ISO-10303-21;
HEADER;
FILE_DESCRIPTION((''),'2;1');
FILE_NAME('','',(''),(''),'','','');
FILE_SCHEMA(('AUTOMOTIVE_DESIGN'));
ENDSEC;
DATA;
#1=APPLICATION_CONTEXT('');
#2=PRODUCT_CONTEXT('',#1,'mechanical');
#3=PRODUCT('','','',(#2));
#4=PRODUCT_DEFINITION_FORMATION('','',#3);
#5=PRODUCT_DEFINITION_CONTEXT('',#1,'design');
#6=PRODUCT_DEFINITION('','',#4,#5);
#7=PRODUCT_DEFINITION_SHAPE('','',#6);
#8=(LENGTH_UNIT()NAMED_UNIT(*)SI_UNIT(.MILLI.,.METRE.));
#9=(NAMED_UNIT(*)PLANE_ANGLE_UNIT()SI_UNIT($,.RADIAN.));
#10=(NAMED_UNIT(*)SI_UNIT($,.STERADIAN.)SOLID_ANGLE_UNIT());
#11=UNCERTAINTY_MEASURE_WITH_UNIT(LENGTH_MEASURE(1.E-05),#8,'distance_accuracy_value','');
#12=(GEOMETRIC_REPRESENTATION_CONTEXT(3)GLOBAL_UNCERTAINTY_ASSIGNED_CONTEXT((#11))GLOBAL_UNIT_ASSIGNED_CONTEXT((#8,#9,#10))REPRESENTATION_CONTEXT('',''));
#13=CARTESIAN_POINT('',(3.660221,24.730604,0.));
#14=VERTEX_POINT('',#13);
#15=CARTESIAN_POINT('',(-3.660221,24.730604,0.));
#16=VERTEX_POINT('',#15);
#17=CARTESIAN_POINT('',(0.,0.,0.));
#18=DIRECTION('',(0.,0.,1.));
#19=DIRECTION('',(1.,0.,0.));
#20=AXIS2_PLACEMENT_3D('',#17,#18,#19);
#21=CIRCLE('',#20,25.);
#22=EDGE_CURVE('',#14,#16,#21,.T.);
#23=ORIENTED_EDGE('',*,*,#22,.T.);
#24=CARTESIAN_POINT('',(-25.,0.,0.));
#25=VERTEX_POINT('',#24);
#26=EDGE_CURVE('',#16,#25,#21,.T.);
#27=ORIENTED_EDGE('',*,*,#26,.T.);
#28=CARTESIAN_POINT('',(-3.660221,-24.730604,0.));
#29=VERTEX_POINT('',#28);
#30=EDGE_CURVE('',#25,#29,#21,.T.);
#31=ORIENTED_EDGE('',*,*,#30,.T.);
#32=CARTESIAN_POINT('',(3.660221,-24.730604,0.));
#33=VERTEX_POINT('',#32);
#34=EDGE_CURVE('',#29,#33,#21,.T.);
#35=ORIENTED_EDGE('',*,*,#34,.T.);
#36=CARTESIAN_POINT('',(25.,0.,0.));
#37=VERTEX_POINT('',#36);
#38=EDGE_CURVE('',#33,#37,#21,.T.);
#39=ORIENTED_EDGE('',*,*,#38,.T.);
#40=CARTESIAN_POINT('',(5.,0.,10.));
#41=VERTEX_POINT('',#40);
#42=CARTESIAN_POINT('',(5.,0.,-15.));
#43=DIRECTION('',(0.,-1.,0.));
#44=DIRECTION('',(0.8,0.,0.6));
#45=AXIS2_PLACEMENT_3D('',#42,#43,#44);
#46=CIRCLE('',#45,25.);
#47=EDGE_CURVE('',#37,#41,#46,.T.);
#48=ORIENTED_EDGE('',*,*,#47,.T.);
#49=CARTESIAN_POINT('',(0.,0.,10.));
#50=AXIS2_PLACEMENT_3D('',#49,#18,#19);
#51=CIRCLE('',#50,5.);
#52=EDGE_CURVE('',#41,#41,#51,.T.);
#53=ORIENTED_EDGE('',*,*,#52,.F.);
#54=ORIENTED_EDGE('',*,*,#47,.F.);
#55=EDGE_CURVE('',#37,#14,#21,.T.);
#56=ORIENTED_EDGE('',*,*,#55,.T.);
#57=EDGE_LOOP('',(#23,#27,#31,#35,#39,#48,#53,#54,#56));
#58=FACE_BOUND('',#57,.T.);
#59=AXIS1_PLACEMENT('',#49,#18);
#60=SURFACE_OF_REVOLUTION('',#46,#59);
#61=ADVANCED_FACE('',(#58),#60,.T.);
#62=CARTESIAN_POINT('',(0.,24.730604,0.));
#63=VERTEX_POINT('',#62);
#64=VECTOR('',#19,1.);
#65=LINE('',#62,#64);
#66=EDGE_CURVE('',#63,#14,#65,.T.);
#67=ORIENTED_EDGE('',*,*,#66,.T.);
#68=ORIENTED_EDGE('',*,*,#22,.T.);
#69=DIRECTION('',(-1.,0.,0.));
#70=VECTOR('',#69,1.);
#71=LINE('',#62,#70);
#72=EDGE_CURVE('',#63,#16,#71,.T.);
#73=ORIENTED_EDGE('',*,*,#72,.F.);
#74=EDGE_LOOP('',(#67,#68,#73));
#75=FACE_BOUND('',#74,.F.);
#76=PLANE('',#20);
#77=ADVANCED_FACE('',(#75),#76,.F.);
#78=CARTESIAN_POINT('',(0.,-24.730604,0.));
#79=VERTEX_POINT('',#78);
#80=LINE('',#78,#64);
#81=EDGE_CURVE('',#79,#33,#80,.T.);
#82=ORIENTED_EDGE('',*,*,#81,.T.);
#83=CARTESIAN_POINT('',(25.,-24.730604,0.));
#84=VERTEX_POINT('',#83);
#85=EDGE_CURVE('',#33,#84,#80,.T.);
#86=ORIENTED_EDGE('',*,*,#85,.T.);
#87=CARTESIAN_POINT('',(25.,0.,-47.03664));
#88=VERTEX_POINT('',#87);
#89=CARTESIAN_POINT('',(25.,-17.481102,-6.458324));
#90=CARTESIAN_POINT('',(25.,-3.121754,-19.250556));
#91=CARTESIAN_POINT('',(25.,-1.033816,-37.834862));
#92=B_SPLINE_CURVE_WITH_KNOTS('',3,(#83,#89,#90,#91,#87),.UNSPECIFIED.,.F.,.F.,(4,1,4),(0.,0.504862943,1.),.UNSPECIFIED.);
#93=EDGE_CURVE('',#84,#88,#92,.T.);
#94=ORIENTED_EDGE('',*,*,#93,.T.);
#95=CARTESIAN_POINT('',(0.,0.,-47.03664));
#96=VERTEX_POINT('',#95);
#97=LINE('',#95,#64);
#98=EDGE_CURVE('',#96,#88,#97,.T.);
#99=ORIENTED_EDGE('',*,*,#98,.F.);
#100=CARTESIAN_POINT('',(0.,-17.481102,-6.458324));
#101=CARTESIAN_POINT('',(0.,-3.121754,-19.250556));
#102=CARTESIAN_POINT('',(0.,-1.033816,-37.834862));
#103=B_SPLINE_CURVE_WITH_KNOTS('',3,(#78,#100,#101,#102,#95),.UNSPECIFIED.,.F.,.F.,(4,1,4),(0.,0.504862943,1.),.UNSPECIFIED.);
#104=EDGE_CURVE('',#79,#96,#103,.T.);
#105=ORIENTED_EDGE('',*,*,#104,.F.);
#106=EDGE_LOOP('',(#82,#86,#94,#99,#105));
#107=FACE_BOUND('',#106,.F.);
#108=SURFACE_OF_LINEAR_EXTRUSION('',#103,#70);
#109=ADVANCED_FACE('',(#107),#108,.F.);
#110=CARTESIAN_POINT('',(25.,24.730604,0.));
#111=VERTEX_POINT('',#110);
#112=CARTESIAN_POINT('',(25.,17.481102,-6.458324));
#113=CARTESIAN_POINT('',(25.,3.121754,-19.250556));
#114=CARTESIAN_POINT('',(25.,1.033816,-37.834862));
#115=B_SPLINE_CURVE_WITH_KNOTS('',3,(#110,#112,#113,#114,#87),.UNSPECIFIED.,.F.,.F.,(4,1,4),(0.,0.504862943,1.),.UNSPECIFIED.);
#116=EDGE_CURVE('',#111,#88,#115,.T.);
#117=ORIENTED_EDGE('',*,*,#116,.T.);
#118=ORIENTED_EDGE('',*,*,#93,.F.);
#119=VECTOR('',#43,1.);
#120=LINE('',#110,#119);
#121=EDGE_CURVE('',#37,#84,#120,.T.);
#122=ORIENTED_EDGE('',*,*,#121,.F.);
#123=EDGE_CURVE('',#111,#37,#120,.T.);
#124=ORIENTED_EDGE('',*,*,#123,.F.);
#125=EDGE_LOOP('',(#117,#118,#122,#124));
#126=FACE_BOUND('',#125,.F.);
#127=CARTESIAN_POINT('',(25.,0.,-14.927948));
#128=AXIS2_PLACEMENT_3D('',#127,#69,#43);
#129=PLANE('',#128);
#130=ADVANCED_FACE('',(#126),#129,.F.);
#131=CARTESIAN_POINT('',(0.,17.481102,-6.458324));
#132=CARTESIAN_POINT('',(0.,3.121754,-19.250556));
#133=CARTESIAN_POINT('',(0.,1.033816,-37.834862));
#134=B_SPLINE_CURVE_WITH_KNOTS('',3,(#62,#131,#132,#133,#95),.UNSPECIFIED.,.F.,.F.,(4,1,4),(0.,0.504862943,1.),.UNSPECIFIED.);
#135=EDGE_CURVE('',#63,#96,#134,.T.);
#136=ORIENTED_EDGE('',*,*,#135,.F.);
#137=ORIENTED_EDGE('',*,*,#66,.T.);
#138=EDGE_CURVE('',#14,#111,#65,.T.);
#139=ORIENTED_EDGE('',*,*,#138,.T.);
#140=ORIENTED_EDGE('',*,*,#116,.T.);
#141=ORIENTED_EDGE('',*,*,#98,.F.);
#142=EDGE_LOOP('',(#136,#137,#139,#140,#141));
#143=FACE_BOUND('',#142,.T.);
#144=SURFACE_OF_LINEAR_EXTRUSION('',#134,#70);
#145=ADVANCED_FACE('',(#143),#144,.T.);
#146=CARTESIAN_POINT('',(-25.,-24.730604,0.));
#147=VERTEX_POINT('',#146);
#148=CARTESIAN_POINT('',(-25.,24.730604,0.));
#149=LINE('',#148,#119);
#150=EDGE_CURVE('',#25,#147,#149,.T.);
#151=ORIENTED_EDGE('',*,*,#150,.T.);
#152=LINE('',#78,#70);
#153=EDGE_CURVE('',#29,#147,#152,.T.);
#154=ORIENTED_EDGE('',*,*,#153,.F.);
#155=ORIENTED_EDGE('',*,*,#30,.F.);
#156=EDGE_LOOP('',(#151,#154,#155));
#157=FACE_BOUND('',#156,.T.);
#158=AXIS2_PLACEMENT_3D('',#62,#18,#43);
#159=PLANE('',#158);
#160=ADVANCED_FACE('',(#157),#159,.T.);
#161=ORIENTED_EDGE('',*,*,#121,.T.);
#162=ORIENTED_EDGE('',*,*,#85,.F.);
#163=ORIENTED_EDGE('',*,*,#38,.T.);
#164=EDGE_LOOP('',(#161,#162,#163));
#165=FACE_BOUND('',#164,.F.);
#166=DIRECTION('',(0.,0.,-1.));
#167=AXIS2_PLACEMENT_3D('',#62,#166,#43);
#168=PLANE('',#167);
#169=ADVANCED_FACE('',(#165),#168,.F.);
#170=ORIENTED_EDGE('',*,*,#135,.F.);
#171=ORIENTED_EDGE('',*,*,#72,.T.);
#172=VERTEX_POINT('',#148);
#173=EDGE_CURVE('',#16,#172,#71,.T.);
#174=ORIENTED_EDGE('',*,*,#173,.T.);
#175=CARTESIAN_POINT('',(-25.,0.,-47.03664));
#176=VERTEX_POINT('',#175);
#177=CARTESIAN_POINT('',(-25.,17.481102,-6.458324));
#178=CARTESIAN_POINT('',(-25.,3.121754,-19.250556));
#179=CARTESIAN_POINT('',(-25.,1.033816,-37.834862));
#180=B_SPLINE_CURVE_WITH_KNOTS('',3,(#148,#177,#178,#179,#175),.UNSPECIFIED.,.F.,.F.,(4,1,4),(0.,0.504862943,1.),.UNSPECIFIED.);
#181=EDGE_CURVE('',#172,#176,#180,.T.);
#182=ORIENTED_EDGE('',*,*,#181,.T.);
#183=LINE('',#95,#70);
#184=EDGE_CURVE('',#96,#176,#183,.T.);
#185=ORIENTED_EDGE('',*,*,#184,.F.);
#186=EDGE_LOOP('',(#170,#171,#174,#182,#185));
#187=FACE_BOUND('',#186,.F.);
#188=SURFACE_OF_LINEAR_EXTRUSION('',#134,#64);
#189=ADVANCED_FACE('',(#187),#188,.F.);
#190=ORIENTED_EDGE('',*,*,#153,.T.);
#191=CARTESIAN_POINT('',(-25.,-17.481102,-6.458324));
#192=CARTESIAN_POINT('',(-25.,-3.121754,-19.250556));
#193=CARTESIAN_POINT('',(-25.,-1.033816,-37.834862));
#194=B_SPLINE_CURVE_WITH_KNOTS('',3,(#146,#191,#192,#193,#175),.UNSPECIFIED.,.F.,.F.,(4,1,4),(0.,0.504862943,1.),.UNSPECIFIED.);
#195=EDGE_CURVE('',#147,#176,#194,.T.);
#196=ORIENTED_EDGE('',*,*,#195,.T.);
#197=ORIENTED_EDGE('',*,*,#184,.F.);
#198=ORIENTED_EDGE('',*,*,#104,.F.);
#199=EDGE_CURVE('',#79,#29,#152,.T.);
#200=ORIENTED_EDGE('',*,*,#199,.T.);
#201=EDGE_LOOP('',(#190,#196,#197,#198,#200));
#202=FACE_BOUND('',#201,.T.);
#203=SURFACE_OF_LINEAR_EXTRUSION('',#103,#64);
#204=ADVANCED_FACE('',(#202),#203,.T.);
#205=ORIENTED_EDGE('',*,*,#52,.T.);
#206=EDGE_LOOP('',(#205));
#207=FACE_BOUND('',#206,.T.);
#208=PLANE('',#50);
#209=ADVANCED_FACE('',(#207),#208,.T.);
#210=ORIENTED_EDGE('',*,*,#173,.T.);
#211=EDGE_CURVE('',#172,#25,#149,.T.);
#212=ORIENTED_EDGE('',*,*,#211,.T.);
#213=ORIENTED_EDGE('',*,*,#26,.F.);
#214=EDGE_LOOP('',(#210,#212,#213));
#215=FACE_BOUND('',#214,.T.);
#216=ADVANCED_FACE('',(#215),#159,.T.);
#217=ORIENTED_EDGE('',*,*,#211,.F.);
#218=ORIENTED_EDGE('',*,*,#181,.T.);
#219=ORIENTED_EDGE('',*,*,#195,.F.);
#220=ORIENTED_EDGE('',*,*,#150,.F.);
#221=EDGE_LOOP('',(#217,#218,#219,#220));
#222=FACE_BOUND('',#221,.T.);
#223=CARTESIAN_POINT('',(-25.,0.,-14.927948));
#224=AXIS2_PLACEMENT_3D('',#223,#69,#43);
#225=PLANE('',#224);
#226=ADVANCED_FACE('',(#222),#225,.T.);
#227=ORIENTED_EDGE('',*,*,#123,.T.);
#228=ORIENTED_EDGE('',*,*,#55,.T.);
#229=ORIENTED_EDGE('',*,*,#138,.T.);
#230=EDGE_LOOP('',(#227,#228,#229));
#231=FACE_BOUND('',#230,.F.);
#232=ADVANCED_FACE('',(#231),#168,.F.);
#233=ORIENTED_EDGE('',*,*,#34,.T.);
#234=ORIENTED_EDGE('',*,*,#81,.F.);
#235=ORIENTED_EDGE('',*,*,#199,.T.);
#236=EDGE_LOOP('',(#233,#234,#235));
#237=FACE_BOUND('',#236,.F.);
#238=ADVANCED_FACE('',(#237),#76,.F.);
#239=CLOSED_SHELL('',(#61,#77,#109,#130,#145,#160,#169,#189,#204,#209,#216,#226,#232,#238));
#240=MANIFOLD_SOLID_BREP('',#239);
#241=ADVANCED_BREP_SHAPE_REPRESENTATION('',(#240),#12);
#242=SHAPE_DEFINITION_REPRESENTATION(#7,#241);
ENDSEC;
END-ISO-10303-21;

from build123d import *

# Parameters (mm, degrees)
F0_R     = 25
F1_DEPTH = 10
F4_DEPTH = 25
F5_DEPTH = 25


# Not quite as in the source:
# - a fillet or chamfer that OpenCascade refuses, or shapes differently, is made with other operations: its cross-section is extruded or revolved along the edge and cut away or added


with BuildPart() as f1:
    # F0 (on Top) → F1 (new body)
    with BuildSketch(Plane.XY):
        Circle(F0_R)
    extrude(amount=F1_DEPTH)

    # F2: fillet of radius 25 on 1 edges, made by hand

    # F2_s1 → F2_t2 (revolve, cut)
    with BuildSketch(Plane.XZ):
        with BuildLine():
            ThreePointArc((25, 0), (16.1803398875, 7.360679775), (5, 10))
            Line((5, 10), (25, 10))
            Line((25, 10), (25, 0))
        make_face()
    revolve(axis=Axis((0, 0, 10), (0, 0, 1)), mode=Mode.SUBTRACT)

    # F3 (on Right) → F4 (join)
    with BuildSketch(Plane.YZ):
        with BuildLine():
            add(Edge.make_bspline(
                [(24.730604142, 0), (17.4811016216, -6.4583238577), (3.1217539474, -19.2505557941), (1.033815633, -37.8348617707), (0, -47.0366403461)],
                knots=[0, 0, 0, 0, 0.5048629426, 1, 1, 1, 1], degree=3))
            Line((24.730604142, 0), (-24.730604142, 0))
            add(Edge.make_bspline(
                [(-24.730604142, 0), (-17.4811016216, -6.4583238577), (-3.1217539474, -19.2505557941), (-1.033815633, -37.8348617707), (0, -47.0366403461)],
                knots=[0, 0, 0, 0, 0.5048629426, 1, 1, 1, 1], degree=3))
        make_face()
    extrude(amount=F4_DEPTH)

    # F5 (add): a face of the model
    f5_faces = [f1.faces().sort_by_distance(p)[0] for p in [
        (0, 0, -11.4252371801),
    ]]
    extrude(f5_faces, amount=F5_DEPTH)


solid = f1.part
